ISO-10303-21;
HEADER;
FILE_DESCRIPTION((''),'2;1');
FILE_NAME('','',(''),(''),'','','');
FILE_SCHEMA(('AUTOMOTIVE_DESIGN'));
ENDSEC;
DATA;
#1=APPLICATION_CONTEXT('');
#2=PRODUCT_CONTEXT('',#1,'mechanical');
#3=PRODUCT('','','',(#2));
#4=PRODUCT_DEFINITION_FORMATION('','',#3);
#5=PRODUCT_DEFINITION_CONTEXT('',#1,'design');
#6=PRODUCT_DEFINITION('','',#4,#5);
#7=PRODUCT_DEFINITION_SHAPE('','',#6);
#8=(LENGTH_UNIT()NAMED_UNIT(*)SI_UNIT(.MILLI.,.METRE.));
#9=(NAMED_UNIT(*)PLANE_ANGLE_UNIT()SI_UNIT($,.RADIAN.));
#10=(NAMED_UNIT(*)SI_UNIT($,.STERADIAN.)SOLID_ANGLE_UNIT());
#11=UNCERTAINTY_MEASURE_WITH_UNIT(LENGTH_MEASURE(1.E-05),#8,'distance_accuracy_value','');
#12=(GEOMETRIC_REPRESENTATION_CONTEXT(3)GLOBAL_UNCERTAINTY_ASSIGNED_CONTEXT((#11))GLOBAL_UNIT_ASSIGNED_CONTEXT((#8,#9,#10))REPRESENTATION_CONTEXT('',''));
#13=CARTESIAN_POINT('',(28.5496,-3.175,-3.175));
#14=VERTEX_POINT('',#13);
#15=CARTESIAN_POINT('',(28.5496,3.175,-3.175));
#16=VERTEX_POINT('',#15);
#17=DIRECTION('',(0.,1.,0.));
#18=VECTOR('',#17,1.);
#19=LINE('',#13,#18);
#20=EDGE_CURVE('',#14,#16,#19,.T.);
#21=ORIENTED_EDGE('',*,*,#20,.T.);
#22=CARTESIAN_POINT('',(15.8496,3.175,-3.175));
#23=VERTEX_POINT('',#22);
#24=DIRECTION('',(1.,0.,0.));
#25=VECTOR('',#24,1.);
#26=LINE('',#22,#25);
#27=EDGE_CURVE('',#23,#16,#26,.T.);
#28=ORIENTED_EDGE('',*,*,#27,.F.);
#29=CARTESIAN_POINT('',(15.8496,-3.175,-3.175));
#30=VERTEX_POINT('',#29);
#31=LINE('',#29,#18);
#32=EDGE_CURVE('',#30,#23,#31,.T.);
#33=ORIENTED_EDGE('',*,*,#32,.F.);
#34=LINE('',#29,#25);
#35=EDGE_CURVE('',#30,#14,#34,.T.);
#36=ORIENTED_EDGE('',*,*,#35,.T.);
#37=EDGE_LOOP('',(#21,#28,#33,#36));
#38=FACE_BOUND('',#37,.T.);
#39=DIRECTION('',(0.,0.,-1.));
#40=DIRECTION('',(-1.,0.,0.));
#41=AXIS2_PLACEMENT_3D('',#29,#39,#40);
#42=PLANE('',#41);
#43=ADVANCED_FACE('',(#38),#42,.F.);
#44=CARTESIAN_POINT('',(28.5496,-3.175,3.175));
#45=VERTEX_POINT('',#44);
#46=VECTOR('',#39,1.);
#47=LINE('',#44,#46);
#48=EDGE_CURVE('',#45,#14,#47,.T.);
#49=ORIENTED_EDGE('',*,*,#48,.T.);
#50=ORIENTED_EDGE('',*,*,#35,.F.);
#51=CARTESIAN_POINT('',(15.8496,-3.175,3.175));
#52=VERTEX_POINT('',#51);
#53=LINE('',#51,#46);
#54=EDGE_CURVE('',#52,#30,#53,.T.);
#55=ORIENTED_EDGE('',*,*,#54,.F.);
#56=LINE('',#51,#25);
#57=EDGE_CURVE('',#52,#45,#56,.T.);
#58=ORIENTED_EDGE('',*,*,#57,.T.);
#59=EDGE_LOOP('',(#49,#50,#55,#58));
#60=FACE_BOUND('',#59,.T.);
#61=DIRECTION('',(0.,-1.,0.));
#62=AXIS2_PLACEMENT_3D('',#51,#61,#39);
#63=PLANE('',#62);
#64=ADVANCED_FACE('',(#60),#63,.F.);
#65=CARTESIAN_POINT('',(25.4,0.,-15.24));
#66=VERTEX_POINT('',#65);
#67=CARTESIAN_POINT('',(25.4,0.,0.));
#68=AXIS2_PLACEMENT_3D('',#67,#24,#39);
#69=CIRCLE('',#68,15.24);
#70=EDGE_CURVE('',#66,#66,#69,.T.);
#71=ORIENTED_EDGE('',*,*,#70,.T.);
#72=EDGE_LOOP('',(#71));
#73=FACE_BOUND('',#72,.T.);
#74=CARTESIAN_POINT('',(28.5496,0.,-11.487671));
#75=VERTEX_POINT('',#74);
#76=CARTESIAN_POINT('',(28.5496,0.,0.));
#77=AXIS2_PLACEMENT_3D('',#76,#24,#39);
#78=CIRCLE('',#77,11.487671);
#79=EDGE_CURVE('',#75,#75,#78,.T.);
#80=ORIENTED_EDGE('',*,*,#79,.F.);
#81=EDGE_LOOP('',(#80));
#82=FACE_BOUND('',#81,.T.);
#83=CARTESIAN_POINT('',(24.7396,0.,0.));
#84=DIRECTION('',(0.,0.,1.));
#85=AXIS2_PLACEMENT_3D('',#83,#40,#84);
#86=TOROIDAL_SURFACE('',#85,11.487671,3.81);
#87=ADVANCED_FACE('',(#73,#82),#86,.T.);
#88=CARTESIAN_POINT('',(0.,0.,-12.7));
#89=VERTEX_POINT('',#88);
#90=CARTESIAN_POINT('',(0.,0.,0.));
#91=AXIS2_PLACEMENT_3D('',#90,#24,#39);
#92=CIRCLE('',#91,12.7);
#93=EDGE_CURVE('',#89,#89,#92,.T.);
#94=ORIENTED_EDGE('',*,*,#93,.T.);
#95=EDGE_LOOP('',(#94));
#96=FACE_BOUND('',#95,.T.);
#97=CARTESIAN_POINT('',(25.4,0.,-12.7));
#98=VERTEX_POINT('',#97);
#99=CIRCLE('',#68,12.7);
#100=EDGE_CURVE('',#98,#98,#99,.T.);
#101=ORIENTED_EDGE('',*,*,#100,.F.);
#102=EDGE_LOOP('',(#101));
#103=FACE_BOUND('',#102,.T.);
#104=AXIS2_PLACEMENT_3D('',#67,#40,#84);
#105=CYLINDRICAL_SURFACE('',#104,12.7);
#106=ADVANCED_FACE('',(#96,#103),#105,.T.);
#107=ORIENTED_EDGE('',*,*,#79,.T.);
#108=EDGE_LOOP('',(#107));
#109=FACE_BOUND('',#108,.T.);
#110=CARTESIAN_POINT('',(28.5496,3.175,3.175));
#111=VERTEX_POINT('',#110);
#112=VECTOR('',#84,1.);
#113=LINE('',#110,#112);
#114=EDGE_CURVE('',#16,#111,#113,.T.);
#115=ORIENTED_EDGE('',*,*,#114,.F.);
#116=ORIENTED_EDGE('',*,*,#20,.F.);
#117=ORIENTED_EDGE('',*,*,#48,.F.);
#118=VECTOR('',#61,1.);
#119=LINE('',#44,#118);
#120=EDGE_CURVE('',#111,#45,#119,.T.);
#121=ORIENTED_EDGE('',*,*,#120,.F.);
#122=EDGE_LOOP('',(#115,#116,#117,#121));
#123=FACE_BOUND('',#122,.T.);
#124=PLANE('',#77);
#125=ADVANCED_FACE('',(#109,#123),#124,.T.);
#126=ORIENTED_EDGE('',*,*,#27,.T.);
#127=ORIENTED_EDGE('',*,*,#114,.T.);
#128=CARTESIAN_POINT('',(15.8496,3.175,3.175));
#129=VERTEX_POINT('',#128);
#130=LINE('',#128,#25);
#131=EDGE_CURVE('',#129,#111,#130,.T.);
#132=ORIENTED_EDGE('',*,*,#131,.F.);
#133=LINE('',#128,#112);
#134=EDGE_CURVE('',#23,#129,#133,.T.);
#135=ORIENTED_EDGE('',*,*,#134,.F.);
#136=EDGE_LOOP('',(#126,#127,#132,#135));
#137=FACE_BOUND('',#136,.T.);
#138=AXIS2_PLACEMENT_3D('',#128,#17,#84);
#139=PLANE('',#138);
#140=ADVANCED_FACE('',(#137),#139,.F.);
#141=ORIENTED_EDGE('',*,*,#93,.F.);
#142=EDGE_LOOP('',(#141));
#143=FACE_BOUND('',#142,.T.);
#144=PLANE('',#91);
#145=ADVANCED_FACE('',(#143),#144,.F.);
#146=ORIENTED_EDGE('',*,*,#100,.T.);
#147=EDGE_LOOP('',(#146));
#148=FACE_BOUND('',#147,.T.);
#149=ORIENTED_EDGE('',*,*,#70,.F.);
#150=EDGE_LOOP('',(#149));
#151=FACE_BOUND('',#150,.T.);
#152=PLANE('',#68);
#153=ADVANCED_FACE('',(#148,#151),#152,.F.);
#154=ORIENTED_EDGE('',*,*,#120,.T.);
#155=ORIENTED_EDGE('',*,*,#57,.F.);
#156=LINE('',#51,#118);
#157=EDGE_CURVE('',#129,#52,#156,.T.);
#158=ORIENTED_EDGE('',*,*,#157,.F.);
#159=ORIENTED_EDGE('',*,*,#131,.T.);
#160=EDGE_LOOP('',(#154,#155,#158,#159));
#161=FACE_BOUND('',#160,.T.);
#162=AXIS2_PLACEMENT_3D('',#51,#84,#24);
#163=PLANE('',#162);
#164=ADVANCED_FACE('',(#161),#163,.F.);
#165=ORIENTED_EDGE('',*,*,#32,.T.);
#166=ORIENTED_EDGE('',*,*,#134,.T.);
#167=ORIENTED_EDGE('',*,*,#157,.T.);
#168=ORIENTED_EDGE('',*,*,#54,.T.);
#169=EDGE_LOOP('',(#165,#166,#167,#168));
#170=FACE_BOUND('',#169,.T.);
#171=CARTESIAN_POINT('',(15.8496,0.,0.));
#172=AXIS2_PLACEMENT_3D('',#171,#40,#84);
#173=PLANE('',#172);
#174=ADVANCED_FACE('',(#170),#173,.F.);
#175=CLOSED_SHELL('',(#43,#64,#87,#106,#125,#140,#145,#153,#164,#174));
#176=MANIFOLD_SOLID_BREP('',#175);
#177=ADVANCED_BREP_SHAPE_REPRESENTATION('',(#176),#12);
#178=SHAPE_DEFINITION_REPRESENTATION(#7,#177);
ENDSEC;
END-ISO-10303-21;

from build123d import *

# Parameters (mm, degrees)
SKETCH1_R           = 12.7
BOSS_EXTRUDE1_DEPTH = 25.4
SKETCH2_R           = 15.24
BOSS_EXTRUDE2_DEPTH = 3.1496
FILLET1_R           = 3.81
SKETCH5_W           = 6.35
SKETCH5_H           = 6.35
CUT_EXTRUDE2_DEPTH  = 12.7


with BuildPart() as part:
    # Sketch1 → Boss-Extrude1 (new body)
    with BuildSketch(Plane(origin=(0, 0, 0), x_dir=(0, 0, -1), z_dir=(1, 0, 0))):
        Circle(SKETCH1_R)
    extrude(amount=BOSS_EXTRUDE1_DEPTH)

    # Sketch2 → Boss-Extrude2 (add)
    with BuildSketch(Plane(origin=(25.4, 0, 0), x_dir=(0, 0, -1), z_dir=(1, 0, 0))):
        Circle(SKETCH2_R)
    extrude(amount=BOSS_EXTRUDE2_DEPTH)

    # Fillet1
    # the kernel refuses this fillet: 3.81 mm, written as the material it takes off along each edge
    with BuildSketch(Plane(origin=(28.5496, 0, 0), x_dir=(0, 0, -1), z_dir=(0, -1, 0))) as fillet1_piece_1:
        with BuildLine():
            CenterArc((11.487671144, -3.81), FILLET1_R, 9.98168298, 80.01831702)
            Line((11.487671144, 0), (11.487671144, 0.0762))
            Line((11.487671144, 0.0762), (15.24, 0.0762))
            Line((15.24, 0.0762), (15.3162, 0))
            ThreePointArc((15.3162, 0), (15.3162, -1.5748), (15.315046577, -3.136392))
            Line((15.315046577, -3.136392), (15.24, -3.1496))
        make_face()
    revolve(axis=Axis((28.5496, 0, 0), (1, 0, 0)), mode=Mode.SUBTRACT)

    # Sketch5 → Cut-Extrude2 (cut)
    with BuildSketch(Plane(origin=(28.5496, 0, 0), x_dir=(0, 0, -1), z_dir=(1, 0, 0))):
        Rectangle(SKETCH5_W, SKETCH5_H)
    extrude(amount=-CUT_EXTRUDE2_DEPTH, mode=Mode.SUBTRACT)


solid = part.part
